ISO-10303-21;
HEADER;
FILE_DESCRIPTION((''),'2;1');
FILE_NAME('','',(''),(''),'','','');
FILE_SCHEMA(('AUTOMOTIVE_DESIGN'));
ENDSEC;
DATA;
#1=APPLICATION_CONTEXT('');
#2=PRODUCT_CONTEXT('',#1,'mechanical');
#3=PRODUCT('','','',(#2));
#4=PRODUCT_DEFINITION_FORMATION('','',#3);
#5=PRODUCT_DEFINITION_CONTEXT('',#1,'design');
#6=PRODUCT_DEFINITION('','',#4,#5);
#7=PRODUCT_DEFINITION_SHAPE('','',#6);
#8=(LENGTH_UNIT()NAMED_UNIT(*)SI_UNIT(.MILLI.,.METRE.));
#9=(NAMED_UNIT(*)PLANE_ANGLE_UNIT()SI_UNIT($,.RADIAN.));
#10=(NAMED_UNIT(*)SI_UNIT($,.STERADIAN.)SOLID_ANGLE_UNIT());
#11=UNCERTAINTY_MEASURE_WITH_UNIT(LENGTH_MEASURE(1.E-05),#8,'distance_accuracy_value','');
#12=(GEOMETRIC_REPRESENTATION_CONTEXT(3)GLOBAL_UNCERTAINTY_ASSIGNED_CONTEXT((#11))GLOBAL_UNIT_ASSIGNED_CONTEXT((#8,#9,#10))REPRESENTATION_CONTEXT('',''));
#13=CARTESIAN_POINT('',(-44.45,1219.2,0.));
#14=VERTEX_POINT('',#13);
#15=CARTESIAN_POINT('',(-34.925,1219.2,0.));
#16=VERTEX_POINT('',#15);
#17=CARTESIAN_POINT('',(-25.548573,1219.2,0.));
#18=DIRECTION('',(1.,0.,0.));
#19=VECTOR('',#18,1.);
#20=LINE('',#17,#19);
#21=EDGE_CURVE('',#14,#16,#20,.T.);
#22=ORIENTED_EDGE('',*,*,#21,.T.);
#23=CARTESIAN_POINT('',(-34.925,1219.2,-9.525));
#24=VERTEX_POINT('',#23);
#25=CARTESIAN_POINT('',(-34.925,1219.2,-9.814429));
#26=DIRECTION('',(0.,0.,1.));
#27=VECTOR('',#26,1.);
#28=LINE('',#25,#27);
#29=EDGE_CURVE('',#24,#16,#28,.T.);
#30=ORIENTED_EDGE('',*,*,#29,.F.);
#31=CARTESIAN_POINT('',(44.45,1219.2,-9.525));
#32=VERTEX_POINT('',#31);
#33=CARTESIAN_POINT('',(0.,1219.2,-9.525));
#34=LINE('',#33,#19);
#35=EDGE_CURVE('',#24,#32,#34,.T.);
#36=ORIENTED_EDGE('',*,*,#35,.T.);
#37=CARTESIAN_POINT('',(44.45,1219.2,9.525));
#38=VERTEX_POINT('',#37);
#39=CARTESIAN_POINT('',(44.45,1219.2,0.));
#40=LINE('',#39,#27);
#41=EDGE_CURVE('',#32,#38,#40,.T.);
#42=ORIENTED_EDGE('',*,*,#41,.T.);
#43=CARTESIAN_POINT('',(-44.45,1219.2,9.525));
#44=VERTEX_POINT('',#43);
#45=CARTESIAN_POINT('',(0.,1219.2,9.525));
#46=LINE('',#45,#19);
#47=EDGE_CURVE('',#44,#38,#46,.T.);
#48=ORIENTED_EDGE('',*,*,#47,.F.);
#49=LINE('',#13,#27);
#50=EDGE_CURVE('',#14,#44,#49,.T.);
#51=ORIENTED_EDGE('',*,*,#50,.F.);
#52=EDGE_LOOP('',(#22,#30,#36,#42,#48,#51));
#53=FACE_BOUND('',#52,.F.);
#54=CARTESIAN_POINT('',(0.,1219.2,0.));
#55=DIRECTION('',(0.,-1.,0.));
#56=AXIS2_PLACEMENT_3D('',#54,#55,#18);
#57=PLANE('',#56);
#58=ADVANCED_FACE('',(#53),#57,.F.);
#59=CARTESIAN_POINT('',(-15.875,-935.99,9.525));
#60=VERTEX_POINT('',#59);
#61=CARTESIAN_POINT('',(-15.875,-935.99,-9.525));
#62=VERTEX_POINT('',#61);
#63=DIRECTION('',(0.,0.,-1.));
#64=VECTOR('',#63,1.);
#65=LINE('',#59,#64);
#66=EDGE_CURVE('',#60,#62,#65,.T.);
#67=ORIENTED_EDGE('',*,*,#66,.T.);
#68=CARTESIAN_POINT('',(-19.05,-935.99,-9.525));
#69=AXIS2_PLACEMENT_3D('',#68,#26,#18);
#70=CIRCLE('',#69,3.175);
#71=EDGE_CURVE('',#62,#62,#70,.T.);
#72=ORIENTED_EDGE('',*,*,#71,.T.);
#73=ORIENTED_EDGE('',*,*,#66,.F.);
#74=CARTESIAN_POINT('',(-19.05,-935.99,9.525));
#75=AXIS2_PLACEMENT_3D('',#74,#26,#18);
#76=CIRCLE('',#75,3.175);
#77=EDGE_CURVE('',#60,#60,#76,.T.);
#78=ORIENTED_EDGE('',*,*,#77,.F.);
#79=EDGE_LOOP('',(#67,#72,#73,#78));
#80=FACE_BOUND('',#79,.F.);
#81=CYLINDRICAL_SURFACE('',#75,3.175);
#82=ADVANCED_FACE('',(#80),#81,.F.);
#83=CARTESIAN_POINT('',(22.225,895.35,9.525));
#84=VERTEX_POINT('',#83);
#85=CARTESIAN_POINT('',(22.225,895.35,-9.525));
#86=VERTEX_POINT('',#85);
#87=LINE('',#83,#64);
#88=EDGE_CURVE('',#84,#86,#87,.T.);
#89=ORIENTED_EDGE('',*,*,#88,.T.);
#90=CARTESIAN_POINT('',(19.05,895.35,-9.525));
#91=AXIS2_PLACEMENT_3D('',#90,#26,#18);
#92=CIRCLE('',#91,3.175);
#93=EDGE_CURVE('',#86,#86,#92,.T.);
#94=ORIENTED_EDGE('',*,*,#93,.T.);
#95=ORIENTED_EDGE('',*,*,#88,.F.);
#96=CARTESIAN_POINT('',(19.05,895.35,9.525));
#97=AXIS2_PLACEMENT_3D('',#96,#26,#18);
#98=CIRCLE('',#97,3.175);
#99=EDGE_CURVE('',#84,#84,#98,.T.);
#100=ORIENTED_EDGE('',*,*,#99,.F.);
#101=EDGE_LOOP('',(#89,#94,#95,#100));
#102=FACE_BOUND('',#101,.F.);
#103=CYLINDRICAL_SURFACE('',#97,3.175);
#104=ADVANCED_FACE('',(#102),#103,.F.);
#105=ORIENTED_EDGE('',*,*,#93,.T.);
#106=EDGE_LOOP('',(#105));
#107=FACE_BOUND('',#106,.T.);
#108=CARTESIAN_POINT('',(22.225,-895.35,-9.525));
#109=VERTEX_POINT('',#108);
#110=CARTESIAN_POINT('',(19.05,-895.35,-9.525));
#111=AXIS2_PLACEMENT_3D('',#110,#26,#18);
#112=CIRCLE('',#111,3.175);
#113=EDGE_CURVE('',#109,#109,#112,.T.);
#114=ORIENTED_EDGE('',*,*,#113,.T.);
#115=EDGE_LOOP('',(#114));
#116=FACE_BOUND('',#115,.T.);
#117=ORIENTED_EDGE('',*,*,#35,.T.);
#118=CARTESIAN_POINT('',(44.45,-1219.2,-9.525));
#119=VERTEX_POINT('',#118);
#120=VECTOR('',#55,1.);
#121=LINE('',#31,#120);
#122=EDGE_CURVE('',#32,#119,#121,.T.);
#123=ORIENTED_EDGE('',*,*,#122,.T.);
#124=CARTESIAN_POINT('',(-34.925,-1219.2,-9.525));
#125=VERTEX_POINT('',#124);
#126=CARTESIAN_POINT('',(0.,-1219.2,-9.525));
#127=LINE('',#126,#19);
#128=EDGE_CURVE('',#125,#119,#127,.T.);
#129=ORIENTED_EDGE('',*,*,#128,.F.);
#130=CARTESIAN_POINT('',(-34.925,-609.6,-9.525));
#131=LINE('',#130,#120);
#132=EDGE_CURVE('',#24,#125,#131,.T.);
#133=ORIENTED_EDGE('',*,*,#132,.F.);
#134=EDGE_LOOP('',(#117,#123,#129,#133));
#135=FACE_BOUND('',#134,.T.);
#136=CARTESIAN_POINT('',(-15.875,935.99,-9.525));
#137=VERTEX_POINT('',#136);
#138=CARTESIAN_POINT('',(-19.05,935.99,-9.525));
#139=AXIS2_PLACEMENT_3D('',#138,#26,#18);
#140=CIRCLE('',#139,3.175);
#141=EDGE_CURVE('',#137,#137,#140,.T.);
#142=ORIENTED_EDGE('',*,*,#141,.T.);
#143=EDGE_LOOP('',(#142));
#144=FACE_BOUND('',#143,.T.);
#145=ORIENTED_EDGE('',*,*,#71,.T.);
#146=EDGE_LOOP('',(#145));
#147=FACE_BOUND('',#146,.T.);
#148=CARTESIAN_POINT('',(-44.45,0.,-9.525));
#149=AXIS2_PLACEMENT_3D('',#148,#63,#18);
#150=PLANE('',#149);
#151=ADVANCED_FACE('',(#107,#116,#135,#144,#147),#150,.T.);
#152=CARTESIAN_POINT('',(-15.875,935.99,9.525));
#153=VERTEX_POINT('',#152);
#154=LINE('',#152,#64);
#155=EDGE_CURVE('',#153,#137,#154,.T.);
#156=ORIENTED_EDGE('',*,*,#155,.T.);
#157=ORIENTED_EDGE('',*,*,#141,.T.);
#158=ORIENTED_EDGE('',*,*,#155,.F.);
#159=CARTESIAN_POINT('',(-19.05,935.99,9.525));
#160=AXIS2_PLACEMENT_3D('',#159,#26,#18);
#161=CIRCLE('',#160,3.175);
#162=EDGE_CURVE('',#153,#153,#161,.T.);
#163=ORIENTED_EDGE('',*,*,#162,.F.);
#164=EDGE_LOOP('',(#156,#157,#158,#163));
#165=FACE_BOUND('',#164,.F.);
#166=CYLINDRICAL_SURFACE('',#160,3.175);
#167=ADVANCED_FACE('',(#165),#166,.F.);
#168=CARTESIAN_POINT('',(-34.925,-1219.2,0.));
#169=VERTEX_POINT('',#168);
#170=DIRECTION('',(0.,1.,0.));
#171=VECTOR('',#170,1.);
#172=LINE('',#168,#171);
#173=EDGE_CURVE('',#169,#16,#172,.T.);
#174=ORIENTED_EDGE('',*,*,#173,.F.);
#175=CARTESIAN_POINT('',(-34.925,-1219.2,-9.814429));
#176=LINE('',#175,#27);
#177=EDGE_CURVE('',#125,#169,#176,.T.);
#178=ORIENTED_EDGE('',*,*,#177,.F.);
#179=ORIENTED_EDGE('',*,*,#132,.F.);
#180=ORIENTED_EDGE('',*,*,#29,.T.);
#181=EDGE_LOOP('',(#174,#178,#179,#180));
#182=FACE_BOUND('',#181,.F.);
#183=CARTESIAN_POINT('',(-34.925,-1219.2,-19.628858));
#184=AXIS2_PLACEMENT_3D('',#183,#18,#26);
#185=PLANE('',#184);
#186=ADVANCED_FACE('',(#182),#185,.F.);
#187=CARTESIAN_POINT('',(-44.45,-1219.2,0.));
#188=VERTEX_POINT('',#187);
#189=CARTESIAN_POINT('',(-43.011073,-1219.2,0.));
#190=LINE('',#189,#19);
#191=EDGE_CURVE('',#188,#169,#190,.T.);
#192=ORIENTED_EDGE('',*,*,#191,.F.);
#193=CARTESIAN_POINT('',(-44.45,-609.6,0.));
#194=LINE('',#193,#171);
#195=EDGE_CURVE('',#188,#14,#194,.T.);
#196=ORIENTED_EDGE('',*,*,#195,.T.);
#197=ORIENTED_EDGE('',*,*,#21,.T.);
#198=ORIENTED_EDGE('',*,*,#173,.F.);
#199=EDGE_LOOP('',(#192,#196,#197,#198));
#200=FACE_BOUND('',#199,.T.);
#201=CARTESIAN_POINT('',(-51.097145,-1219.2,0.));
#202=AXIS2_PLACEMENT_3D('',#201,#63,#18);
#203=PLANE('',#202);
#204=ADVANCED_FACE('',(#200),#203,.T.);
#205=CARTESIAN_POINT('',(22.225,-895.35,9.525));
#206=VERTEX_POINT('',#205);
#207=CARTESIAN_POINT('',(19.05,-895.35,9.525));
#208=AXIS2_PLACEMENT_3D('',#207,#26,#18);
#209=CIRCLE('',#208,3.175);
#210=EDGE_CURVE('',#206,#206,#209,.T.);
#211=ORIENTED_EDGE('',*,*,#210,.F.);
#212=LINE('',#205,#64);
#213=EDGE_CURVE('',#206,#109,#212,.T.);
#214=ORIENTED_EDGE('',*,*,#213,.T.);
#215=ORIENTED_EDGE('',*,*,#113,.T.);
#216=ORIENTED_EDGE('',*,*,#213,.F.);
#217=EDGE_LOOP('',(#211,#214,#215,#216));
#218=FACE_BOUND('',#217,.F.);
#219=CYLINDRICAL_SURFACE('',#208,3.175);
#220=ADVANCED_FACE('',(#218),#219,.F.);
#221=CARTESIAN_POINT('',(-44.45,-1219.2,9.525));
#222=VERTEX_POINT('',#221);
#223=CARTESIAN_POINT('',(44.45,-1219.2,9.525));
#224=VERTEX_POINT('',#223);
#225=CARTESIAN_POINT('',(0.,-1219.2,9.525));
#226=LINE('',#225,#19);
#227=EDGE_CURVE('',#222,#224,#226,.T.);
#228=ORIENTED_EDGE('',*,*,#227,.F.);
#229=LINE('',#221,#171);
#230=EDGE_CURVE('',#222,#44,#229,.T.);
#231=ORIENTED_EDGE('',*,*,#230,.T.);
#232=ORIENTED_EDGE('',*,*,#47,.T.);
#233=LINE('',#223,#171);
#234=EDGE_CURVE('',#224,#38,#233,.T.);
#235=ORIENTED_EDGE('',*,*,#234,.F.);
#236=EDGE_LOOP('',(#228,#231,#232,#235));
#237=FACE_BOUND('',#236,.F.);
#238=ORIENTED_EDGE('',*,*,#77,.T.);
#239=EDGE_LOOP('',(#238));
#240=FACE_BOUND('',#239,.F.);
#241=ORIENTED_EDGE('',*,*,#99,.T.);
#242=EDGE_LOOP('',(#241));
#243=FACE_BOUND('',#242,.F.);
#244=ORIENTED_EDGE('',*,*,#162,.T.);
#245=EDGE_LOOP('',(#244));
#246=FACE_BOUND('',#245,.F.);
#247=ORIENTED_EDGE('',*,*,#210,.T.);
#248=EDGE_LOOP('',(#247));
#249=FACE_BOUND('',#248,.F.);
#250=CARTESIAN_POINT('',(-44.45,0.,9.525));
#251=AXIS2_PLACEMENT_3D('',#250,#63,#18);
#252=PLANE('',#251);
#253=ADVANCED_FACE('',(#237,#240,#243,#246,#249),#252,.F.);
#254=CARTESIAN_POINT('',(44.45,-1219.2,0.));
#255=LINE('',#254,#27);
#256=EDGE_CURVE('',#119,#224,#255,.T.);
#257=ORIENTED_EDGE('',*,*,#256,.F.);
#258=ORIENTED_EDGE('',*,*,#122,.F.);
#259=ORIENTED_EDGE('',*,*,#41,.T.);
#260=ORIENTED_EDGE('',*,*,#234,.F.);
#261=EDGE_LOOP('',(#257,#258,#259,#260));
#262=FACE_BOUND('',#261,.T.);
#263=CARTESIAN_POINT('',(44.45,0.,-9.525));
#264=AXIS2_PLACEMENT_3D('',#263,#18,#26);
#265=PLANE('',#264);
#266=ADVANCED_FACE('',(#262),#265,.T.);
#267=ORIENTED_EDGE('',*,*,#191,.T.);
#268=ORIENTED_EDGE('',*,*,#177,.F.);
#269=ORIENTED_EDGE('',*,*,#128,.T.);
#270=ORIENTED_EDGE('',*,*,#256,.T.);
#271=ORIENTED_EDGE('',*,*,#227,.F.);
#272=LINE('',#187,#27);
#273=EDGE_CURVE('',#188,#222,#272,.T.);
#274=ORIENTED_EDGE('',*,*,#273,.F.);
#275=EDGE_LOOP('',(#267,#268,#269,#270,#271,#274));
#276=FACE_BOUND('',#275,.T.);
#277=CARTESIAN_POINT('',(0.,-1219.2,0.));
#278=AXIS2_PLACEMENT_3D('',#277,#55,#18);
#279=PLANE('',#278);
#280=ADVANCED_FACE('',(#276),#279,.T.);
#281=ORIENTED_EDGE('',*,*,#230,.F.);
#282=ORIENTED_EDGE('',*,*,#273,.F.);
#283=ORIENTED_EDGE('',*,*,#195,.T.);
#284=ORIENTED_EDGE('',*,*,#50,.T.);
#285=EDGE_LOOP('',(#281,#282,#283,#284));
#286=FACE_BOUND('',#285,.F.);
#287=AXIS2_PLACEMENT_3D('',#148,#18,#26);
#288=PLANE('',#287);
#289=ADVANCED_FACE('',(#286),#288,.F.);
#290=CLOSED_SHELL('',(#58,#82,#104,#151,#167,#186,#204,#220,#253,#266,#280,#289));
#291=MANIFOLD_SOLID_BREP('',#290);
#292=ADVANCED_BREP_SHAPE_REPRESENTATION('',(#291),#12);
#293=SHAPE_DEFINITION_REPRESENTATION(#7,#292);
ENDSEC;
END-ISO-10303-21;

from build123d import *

# Parameters (mm, degrees)
F0_W     = 88.9
F0_H     = 19.05
F1_DEPTH = 1219.2
F2_W     = 16.1721451446
F2_H     = 19.628858405
F3_DEPTH = 3660
F4_R     = 3.175
F5_DEPTH = 19.05


# Not quite as in the source:
# - an extrude ends at something that could not be found from the text; its depth is read off the source's solid


with BuildPart() as f1:
    # F0 (on Front) → F1 (new body, symmetric)
    with BuildSketch(Plane.XZ):
        Rectangle(F0_W, F0_H)
    extrude(amount=F1_DEPTH, both=True)

    # F2 (on face) → F3 (cut, through all)
    with BuildSketch(Plane.XZ.offset(1219.2)):
        with Locations((-43.0110725723, -9.8144292025)):
            Rectangle(F2_W, F2_H)
    extrude(amount=-F3_DEPTH, mode=Mode.SUBTRACT)

    # F4 (on face) → F5 (cut, through all)
    with BuildSketch(Plane.XY.offset(9.525)):
        with Locations((19.05, -895.35)):
            Circle(F4_R)
        with Locations((-19.05, -935.99)):
            Circle(F4_R)
        with Locations((-19.05, 935.99)):
            Circle(F4_R)
        with Locations((19.05, 895.35)):
            Circle(F4_R)
    extrude(amount=-F5_DEPTH, mode=Mode.SUBTRACT)


solid = f1.part
